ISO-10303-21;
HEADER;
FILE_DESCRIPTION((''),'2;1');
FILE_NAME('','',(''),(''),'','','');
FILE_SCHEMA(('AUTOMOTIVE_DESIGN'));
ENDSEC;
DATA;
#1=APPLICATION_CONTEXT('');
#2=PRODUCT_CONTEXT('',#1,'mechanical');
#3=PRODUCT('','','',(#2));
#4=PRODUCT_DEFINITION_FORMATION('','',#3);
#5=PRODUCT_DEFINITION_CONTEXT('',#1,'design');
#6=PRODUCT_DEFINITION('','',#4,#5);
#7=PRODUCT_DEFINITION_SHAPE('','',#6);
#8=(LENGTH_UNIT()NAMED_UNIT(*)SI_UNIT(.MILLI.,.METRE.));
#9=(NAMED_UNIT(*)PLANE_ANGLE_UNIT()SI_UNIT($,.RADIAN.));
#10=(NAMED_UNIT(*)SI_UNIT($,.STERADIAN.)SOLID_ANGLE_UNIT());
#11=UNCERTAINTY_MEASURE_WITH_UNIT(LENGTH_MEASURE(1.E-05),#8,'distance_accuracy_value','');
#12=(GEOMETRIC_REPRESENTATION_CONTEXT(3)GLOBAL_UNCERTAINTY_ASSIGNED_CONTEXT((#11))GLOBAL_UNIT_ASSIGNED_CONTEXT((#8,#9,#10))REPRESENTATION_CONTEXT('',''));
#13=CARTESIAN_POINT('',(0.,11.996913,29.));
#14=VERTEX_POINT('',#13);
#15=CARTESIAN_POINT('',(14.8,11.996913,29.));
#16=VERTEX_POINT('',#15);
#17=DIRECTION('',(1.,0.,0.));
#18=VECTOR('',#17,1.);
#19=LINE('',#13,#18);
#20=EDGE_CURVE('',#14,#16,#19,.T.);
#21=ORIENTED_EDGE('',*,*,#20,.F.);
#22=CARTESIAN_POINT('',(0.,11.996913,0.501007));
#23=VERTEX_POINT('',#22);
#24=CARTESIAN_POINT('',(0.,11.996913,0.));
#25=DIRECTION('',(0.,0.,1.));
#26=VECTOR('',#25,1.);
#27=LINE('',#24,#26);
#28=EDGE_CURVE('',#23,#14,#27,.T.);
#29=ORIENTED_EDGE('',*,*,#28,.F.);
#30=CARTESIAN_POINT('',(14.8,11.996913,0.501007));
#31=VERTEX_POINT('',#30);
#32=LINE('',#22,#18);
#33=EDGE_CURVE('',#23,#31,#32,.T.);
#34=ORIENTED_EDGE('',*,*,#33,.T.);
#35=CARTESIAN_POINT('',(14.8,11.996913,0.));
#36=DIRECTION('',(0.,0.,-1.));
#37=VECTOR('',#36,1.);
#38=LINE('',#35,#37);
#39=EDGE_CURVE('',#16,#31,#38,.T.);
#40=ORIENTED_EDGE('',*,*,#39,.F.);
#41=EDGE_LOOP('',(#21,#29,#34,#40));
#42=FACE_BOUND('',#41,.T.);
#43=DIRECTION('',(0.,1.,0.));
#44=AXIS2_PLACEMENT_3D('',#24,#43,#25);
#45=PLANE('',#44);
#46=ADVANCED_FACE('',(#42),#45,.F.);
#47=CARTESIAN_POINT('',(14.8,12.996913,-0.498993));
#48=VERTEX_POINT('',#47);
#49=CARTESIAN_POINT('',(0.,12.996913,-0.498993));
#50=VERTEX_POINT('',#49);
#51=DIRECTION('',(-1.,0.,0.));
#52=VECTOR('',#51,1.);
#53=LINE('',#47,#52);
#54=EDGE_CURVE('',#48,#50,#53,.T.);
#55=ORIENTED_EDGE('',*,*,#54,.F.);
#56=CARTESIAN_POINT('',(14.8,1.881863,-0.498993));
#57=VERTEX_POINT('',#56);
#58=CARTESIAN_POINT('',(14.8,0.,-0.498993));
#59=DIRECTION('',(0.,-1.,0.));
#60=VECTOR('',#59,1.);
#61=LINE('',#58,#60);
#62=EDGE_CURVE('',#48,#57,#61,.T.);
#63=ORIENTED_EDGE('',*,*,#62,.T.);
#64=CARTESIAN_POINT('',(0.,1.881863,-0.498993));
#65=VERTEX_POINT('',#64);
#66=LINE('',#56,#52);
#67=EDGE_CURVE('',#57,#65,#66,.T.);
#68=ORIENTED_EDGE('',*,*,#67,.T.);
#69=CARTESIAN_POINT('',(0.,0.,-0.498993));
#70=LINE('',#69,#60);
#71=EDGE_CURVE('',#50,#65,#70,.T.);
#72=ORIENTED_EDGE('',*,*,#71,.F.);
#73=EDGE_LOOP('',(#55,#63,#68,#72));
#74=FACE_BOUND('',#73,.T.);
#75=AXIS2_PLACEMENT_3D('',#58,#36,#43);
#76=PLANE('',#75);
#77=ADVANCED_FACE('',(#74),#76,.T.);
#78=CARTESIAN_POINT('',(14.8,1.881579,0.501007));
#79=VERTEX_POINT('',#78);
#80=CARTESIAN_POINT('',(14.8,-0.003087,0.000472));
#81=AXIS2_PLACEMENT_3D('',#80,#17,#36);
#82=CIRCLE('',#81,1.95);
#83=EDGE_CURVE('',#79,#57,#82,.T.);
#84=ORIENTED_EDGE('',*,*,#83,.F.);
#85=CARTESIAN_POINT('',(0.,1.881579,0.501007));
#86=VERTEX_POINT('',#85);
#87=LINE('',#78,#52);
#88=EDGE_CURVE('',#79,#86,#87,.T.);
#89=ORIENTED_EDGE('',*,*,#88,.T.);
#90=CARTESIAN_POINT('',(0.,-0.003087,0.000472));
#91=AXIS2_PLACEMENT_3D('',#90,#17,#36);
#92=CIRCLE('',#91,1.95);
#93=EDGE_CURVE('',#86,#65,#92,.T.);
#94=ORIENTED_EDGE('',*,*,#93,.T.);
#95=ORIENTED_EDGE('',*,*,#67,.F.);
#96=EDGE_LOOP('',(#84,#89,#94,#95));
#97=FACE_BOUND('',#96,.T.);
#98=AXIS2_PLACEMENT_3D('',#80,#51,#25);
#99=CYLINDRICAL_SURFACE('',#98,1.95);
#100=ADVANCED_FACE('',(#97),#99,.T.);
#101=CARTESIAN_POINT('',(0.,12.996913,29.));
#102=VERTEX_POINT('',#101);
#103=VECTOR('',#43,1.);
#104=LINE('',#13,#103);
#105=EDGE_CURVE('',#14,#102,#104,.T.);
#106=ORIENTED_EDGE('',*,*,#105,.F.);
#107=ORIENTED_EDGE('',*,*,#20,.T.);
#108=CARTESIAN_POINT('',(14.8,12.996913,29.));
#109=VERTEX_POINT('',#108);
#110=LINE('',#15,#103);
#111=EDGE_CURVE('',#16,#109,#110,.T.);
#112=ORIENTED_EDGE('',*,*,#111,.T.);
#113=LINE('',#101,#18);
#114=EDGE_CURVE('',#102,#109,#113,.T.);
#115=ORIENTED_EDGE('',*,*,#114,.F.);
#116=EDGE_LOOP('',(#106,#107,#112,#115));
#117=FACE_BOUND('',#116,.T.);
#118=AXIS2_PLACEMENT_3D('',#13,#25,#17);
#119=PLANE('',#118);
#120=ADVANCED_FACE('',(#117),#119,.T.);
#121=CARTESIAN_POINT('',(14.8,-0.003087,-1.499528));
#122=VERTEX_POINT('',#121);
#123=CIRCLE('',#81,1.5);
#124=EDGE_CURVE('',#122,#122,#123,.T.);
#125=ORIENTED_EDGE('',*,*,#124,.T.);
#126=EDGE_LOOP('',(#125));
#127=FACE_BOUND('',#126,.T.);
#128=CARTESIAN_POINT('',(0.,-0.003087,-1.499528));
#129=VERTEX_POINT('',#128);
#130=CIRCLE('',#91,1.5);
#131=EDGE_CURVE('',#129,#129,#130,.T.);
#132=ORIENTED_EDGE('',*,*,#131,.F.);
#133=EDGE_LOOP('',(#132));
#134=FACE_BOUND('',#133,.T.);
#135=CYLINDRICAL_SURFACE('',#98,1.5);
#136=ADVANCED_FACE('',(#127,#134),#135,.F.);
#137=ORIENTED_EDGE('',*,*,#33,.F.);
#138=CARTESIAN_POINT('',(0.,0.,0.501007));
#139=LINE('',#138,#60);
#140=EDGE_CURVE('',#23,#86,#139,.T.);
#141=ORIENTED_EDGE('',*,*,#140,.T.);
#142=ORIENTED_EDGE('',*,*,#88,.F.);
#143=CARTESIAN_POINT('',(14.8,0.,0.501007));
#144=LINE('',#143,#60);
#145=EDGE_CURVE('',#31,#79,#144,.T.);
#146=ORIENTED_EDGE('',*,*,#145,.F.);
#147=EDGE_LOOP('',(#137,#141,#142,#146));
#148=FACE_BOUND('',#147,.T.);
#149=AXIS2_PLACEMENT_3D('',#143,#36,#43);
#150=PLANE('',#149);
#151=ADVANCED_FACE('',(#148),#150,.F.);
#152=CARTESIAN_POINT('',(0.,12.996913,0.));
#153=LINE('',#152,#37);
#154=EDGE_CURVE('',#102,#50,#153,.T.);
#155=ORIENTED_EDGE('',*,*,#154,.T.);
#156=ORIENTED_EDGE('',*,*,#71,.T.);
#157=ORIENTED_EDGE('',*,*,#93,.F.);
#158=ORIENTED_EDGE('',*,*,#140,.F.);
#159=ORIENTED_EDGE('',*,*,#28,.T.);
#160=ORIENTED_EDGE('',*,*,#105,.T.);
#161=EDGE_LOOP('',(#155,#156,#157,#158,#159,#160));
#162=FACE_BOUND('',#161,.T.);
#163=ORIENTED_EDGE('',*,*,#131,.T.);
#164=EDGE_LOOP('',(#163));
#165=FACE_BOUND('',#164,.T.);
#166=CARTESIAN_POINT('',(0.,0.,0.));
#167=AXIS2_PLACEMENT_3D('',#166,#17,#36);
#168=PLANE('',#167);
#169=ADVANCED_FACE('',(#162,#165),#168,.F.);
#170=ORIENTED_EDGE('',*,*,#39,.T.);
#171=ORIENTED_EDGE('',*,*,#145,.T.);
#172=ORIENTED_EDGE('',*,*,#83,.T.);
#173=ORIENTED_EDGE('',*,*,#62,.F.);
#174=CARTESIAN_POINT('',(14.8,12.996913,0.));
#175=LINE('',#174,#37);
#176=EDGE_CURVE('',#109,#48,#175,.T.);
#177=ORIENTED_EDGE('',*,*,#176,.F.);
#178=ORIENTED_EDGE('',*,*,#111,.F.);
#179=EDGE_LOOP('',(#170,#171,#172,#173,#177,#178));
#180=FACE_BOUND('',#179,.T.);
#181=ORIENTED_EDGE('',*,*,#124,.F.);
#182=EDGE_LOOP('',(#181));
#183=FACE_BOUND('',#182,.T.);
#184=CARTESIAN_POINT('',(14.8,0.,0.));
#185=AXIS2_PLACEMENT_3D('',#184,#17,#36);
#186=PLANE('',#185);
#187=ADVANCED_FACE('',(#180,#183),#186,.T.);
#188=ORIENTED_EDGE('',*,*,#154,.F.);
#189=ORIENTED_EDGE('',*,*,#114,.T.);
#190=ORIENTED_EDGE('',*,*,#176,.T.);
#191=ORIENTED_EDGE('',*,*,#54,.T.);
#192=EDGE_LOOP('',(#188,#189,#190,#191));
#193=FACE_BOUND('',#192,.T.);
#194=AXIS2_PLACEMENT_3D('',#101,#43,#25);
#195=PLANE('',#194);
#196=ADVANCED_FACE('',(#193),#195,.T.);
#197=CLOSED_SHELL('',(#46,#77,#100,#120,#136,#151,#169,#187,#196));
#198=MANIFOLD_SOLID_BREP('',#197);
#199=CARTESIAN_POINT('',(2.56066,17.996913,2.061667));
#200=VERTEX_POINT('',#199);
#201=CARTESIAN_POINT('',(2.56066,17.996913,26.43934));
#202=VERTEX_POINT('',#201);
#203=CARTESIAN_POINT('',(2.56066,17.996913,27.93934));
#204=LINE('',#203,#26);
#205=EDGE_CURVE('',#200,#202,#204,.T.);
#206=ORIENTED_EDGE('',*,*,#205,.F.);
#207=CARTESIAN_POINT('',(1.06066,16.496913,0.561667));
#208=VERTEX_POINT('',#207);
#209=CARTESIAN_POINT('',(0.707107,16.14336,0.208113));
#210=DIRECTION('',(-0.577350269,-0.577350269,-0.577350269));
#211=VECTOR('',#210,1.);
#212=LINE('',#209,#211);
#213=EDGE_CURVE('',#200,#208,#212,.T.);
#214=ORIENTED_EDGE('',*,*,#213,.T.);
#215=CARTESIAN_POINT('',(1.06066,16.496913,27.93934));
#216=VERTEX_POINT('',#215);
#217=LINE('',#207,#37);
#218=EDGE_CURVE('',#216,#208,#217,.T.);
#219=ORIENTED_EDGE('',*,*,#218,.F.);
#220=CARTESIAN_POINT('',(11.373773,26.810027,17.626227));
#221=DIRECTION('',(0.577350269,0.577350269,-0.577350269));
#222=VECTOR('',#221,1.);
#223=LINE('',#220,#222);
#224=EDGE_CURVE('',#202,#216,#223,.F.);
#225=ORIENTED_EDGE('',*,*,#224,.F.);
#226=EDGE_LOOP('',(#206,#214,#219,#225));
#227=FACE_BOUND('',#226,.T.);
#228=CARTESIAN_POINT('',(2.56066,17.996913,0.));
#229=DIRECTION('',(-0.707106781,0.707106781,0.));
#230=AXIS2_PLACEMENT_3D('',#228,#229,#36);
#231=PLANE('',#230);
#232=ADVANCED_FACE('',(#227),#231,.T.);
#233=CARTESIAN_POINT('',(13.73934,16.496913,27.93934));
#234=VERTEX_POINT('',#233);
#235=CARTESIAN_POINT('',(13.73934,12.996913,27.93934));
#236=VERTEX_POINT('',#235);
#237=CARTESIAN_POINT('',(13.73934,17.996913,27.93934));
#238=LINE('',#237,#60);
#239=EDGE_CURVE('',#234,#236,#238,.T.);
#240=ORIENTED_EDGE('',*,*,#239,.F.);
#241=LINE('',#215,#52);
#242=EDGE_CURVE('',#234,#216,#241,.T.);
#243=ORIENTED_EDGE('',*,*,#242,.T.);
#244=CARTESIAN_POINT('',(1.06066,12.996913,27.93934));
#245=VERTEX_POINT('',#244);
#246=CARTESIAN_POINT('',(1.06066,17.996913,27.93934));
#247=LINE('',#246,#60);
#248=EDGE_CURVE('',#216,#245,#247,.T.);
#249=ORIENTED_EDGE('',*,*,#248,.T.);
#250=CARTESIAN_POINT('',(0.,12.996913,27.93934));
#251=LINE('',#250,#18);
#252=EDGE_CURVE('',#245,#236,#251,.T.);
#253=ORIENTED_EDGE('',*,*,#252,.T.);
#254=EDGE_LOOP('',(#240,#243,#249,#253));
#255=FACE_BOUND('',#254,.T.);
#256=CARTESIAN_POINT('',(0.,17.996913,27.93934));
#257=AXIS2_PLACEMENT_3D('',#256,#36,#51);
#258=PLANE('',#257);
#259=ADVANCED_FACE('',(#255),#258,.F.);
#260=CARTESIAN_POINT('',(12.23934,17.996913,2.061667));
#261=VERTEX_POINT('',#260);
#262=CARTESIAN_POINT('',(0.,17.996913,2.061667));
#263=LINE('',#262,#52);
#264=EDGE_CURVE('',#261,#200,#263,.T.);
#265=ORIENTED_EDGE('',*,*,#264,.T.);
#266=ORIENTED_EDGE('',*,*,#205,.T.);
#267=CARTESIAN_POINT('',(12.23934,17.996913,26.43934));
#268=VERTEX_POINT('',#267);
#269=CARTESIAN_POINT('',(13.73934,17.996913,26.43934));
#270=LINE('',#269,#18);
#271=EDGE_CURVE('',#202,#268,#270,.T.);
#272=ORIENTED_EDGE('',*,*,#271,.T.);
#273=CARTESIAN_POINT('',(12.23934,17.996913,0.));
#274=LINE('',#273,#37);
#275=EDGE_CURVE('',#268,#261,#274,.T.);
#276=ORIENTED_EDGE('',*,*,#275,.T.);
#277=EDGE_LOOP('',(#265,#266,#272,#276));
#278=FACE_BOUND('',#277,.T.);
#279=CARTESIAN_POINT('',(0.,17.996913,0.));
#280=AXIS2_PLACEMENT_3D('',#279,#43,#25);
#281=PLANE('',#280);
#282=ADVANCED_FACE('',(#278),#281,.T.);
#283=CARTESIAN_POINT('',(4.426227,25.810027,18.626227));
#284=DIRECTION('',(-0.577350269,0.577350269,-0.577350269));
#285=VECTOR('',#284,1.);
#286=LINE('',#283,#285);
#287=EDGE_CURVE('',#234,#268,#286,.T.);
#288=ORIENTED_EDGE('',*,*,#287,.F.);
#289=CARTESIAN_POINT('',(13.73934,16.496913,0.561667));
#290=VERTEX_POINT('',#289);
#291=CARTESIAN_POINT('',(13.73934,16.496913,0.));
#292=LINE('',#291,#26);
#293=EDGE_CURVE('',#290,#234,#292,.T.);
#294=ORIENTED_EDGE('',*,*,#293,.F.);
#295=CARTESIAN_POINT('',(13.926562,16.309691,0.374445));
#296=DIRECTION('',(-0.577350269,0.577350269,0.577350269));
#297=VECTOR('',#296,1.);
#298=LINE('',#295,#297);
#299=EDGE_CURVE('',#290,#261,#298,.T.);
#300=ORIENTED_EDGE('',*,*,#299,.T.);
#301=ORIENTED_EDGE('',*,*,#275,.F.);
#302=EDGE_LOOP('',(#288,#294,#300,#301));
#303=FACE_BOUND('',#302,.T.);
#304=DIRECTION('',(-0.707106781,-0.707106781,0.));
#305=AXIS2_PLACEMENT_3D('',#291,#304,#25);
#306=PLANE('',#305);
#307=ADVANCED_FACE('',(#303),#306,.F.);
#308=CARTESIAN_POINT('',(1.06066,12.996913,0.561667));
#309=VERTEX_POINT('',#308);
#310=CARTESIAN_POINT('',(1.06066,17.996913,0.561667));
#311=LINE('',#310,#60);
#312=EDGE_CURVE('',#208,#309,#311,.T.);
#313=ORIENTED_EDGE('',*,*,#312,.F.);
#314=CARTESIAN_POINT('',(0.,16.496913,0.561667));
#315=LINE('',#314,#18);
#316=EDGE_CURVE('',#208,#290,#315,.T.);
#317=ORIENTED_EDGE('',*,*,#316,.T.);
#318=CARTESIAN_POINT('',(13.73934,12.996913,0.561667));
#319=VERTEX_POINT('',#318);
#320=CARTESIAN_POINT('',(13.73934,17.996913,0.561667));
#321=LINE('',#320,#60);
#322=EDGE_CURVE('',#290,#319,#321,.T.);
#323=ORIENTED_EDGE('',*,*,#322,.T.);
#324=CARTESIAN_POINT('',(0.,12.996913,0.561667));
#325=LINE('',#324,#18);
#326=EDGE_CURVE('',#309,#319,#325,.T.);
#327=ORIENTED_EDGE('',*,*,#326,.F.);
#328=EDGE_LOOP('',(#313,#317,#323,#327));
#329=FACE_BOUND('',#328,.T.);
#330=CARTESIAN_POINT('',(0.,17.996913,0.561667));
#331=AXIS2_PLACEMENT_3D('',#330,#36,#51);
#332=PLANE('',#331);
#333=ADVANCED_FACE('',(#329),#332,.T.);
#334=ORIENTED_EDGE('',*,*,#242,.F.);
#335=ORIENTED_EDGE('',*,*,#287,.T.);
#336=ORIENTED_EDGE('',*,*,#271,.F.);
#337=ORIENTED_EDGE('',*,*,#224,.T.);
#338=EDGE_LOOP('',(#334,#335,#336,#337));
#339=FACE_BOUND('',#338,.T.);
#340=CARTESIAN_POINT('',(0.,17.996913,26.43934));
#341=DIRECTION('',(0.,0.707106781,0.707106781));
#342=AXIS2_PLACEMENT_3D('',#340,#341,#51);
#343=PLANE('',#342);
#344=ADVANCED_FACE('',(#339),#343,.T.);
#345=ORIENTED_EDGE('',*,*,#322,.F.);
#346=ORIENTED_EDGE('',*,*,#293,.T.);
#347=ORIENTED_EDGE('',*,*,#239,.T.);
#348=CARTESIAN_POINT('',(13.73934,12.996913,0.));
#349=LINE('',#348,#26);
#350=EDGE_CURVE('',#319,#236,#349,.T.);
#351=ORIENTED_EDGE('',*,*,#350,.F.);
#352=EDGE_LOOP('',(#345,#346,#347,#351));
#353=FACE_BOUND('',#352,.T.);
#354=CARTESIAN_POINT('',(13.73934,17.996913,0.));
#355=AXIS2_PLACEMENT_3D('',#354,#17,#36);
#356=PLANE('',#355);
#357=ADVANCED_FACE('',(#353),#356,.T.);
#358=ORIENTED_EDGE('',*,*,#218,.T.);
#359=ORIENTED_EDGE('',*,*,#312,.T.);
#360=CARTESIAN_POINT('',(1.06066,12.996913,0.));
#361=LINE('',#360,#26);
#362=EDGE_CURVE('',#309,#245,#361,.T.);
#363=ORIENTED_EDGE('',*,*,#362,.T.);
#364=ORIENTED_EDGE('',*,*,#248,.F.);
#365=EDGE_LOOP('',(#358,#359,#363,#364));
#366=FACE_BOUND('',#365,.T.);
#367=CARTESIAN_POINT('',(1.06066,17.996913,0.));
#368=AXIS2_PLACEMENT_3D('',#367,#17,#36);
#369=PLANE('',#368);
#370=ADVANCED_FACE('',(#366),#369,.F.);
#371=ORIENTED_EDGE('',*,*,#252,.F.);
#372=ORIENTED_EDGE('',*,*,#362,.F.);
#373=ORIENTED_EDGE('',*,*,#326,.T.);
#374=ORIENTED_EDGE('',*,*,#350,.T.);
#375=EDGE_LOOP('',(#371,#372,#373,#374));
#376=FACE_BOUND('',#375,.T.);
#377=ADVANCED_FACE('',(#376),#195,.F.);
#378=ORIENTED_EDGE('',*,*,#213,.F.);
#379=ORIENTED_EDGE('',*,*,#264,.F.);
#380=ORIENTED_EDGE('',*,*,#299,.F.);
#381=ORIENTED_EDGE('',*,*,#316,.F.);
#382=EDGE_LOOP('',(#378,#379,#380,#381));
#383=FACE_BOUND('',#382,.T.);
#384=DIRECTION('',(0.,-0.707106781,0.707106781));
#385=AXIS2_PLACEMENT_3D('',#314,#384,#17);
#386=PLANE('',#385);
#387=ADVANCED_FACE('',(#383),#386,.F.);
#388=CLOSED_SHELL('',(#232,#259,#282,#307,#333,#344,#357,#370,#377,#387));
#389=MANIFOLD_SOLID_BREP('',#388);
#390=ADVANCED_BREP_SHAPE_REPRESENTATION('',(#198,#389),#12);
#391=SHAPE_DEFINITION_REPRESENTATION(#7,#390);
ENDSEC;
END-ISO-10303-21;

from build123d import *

# Parameters (mm, degrees)
BOSS_EXTRUDE1_DEPTH = 14.8
SKETCH4_W           = 14.8
SKETCH4_H           = 28.498993342
BOSS_EXTRUDE2_DEPTH = 1
SKETCH5_W           = 12.678679656
SKETCH5_H           = 27.377672998
BOSS_EXTRUDE3_DEPTH = 5
CHAMFER1_SIZE       = 1.5


with BuildPart() as part:
    # Sketch1 → Boss-Extrude1 (new body)
    with BuildSketch(Plane(origin=(0, 0, 0), x_dir=(0, 0, -1), z_dir=(1, 0, 0))):
        with BuildLine():
            Line((0.498993342, 12.996913423), (-0.000472168, 12.996913423))
            Line((-0.000472168, 12.996913423), (-0.501006658, 12.996913423))
            Line((-0.501006658, 12.996913423), (-0.501006658, 1.881579236))
            ThreePointArc((-0.501006658, 1.881579236), (8.0809e-05, -1.953086498), (0.498993342, 1.881862814))
            Line((0.498993342, 1.881862814), (0.498993342, 12.996913423))
        make_face()
        with BuildLine():
            ThreePointArc((-0.000472168, 1.496913423), (1.060188004, 1.057573595), (1.499527832, -0.003086577))
            ThreePointArc((1.499527832, -0.003086577), (-1.06113234, -1.063746748), (-0.000472168, 1.496913423))
        make_face(mode=Mode.SUBTRACT)
    extrude(amount=BOSS_EXTRUDE1_DEPTH)

    # Sketch4 → Boss-Extrude2 (add)
    with BuildSketch(Plane(origin=(0, 12.996913423, 0), x_dir=(1, 0, 0), z_dir=(0, 1, 0))):
        with Locations((7.4, -14.750503329)):
            Rectangle(SKETCH4_W, SKETCH4_H)
    extrude(amount=-BOSS_EXTRUDE2_DEPTH)

    # Sketch5 → Boss-Extrude3 (add)
    with BuildSketch(Plane(origin=(0, 12.996913423, 0), x_dir=(1, 0, 0), z_dir=(0, 1, 0))):
        with Locations((7.4, -14.250503329)):
            Rectangle(SKETCH5_W, SKETCH5_H)
    extrude(amount=BOSS_EXTRUDE3_DEPTH)

    # Chamfer1
    chamfer1_edges = [part.edges().sort_by_distance(p)[0] for p in [
        (7.4, 17.996913423, 27.939339828),
        (1.060660172, 17.996913423, 14.250503329),
        (7.4, 17.996913423, 0.56166683),
        (13.739339828, 17.996913423, 14.250503329),
    ]]
    chamfer(chamfer1_edges, length=CHAMFER1_SIZE)


with BuildPart() as body_2:
    # Split1: the piece on the far side of the plane
    add(part.part)
    split(bisect_by=Plane(origin=(14.8, 12.996913423, 0), x_dir=(0, 0, 1), z_dir=(0, 1, 0)), keep=Keep.BOTTOM)


with BuildPart() as part_1:
    add(part.part)

    # Split1
    split(bisect_by=Plane(origin=(14.8, 12.996913423, 0), x_dir=(0, 0, 1), z_dir=(0, 1, 0)), keep=Keep.TOP)


solid = Compound([body_2.part, part_1.part])
